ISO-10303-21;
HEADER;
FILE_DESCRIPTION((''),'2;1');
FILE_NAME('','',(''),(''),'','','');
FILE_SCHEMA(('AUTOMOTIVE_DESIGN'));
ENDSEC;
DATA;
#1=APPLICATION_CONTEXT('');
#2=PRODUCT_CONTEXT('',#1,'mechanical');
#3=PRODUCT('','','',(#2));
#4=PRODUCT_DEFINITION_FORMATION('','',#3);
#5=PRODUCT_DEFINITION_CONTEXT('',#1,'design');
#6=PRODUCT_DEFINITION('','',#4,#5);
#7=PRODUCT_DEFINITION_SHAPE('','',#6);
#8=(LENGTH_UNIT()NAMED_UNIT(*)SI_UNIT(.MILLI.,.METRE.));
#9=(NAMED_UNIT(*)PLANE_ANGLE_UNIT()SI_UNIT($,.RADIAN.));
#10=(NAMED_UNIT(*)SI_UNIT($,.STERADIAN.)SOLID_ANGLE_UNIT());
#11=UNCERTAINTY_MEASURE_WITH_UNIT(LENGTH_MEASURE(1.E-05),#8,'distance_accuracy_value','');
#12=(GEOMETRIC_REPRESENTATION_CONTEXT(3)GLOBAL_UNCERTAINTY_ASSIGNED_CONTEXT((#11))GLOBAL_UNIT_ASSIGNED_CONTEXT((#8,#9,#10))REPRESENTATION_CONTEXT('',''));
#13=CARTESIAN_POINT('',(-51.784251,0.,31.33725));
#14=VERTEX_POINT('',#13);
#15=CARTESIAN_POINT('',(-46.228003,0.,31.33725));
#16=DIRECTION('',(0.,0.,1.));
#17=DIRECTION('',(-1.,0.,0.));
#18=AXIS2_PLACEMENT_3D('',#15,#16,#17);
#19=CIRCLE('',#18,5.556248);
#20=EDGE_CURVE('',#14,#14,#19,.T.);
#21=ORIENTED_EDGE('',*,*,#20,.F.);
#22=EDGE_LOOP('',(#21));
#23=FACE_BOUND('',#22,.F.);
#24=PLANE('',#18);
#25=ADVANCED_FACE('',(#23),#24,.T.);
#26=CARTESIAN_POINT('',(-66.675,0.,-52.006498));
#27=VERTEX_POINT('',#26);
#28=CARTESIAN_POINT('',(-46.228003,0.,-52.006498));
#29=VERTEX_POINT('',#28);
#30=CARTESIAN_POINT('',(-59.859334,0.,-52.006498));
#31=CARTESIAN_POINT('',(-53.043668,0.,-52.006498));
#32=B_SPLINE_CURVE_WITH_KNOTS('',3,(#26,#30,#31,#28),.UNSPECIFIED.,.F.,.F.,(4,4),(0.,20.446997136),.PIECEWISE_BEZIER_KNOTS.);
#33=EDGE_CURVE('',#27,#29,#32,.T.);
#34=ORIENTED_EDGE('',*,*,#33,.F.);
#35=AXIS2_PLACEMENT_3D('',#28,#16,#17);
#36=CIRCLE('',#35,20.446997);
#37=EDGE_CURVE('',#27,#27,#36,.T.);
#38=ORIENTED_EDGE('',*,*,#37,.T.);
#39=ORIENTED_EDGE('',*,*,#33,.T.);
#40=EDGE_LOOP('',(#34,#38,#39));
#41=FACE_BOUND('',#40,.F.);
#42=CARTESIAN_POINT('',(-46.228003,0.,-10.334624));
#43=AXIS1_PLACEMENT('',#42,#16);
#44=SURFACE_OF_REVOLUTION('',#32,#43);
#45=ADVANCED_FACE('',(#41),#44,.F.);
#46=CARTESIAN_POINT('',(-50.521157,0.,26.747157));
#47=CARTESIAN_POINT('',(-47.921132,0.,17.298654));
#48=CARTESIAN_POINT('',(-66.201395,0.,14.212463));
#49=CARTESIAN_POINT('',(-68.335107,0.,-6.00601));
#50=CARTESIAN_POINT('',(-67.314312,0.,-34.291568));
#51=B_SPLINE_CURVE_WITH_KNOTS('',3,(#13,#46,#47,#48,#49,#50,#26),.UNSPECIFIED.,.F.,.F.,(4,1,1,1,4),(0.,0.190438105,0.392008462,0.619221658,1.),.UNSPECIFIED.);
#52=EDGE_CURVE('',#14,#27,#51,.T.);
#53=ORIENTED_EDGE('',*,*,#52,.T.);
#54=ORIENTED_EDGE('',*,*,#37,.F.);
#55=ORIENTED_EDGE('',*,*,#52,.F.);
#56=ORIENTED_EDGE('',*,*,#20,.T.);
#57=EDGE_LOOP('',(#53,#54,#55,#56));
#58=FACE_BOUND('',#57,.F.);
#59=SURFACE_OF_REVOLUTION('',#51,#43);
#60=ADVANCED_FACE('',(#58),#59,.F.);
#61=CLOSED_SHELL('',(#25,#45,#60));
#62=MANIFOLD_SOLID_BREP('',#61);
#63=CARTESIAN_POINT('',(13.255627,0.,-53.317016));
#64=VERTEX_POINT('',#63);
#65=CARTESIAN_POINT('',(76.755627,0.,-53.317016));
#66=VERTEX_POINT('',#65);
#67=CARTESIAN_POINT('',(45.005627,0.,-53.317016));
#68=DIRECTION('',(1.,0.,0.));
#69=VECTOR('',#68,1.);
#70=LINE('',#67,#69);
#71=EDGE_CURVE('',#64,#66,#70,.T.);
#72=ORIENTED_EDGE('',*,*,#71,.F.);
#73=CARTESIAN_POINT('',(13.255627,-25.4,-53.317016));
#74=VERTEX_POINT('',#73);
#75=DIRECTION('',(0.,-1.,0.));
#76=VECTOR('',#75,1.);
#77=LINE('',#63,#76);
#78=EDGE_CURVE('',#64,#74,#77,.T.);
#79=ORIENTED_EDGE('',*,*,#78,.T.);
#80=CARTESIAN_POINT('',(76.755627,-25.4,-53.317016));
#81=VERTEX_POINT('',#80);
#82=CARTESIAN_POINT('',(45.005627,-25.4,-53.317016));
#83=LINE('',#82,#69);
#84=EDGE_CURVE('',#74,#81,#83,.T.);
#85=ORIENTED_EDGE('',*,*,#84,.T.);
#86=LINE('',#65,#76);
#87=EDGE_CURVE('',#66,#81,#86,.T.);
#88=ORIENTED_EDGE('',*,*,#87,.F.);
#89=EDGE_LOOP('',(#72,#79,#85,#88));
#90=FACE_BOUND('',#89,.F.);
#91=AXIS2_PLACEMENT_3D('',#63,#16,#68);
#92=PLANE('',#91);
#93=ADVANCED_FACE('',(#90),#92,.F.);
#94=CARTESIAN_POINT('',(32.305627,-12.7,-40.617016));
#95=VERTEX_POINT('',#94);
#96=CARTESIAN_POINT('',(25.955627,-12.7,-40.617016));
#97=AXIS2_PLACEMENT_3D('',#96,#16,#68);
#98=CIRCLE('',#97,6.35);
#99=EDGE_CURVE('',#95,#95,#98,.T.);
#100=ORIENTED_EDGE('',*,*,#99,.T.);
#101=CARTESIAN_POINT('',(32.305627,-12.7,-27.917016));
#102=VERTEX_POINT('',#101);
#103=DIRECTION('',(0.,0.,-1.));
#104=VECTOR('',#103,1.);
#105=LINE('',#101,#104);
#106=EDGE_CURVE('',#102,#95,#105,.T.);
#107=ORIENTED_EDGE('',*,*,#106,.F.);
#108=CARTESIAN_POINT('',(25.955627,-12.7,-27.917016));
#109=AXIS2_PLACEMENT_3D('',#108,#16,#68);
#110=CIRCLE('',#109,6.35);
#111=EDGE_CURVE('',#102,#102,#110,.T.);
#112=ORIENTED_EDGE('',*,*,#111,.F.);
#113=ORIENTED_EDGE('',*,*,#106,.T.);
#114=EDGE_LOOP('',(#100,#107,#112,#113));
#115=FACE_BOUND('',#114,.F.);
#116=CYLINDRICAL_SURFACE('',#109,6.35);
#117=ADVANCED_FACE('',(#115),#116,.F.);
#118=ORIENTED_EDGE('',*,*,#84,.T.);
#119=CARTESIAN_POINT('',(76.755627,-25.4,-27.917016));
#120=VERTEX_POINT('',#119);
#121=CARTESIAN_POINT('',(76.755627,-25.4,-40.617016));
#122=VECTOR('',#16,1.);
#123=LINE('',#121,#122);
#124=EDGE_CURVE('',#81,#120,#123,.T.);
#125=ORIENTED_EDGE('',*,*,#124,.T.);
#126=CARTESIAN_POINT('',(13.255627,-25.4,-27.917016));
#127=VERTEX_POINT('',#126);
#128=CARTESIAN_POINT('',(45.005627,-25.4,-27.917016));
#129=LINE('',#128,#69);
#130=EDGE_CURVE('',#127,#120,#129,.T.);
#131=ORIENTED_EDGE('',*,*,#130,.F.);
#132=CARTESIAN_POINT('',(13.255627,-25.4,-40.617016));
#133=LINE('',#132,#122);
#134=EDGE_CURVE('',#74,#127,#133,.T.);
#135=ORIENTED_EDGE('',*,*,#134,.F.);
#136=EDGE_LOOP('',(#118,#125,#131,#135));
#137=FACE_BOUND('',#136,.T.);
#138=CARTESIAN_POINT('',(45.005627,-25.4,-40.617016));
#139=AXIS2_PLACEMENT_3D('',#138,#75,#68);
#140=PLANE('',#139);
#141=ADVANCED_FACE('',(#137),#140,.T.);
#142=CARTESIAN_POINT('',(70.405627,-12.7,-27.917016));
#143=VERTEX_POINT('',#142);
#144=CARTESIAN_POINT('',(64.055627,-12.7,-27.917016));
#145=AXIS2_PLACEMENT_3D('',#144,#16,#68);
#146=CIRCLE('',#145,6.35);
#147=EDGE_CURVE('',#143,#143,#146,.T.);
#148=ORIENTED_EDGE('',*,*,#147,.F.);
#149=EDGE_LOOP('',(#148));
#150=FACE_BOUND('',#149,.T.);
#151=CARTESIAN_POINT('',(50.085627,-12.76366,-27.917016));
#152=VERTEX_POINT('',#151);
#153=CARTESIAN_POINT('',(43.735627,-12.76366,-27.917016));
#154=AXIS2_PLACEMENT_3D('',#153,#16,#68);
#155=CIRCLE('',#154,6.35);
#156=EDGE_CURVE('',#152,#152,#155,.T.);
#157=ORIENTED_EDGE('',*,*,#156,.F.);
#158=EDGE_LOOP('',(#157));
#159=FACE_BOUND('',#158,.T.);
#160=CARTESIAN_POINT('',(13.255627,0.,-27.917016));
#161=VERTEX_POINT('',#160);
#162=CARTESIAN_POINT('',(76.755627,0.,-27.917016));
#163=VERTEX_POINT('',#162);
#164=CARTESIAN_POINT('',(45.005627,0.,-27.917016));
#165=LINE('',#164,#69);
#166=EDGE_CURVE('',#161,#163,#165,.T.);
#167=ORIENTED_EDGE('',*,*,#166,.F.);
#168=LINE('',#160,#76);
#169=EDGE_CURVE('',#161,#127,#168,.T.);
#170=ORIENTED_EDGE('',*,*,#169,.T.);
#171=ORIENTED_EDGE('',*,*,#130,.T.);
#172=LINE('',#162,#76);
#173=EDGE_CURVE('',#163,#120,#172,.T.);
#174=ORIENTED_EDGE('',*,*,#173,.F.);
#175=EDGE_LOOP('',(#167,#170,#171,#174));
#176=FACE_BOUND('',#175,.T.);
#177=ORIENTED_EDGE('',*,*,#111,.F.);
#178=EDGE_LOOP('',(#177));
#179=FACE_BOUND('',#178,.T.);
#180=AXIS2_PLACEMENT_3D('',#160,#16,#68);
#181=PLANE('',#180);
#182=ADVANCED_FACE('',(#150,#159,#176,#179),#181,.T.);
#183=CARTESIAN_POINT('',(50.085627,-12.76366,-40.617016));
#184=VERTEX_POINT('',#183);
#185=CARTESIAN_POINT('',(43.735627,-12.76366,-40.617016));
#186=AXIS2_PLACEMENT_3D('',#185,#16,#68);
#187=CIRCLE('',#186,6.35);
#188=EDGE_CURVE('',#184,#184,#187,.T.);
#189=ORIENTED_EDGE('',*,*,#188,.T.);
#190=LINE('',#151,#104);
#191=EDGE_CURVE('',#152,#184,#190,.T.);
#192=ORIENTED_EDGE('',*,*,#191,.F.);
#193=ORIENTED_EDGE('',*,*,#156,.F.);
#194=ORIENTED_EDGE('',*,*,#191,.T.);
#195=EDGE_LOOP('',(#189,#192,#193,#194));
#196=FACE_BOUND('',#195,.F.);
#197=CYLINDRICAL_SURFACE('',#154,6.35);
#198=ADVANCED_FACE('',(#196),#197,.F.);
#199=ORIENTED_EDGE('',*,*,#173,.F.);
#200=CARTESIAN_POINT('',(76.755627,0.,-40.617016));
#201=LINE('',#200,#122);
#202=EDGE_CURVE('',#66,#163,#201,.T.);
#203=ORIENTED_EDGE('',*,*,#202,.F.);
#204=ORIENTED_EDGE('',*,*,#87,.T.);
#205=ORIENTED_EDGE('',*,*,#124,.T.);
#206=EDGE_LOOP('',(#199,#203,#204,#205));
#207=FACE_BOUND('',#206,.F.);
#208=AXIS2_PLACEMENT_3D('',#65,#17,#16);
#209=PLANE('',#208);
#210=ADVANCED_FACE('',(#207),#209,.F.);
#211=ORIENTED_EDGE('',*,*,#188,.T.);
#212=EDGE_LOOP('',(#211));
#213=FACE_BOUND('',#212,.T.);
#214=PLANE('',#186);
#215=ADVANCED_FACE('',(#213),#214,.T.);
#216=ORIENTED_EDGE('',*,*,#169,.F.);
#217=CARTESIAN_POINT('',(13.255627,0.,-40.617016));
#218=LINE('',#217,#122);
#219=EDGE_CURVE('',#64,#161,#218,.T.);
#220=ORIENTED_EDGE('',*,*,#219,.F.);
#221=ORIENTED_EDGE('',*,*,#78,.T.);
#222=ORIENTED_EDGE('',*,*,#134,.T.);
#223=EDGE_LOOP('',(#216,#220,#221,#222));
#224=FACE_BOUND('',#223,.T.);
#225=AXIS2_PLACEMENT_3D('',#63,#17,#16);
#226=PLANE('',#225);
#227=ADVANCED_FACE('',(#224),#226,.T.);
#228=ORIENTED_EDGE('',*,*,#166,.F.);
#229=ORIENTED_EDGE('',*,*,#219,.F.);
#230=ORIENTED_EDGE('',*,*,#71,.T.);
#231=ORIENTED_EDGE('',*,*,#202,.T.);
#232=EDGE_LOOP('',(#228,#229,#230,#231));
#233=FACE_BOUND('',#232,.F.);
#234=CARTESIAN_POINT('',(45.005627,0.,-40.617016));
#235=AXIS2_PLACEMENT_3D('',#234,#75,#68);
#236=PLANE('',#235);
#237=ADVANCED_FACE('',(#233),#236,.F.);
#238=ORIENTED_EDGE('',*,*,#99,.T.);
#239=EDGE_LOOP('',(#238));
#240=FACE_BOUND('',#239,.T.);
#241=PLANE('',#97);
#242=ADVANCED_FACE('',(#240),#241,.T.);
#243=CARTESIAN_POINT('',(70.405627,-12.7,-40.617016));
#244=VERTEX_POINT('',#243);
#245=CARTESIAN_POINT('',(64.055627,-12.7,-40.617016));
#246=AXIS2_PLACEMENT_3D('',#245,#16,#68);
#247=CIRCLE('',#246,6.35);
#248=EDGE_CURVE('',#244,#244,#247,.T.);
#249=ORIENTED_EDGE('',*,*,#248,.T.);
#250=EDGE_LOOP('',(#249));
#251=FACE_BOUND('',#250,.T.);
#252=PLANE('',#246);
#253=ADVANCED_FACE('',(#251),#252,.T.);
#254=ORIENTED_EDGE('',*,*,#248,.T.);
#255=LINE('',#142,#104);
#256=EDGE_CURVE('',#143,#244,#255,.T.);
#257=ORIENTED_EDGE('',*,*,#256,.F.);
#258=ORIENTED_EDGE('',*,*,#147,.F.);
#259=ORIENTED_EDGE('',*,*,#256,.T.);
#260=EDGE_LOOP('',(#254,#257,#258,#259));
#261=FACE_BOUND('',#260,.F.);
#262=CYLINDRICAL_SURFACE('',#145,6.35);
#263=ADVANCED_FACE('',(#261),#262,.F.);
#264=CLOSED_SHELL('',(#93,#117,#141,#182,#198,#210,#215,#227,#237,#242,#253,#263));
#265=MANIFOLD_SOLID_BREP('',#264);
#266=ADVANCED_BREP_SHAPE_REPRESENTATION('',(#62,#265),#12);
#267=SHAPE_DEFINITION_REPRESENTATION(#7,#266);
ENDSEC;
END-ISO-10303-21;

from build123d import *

# Parameters (mm, degrees)
F5_W     = 63.5
F5_H     = 25.4
F6_DEPTH = 25.4
F7_R     = 6.35
F8_DEPTH = 12.7


# Not quite as in the source:
# - a feature of the source that left no trace in its solid (it failed there, or was rolled back) is left out


with BuildPart() as f4:
    # F3 (on Front) → F4 (revolve)
    with BuildSketch(Plane.XZ):
        with BuildLine():
            Line((-46.2280027568, 31.3372500241), (-51.7842508852, 31.3372500241))
            add(Edge.make_bspline(
                [(-51.7842508852, 31.3372500241), (-50.5211565441, 26.7471574214), (-47.9211324049, 17.2986537112), (-66.2013951665, 14.212463315), (-68.335106942, -6.0060096659), (-67.3143122563, -34.2915675348), (-66.6749998927, -52.0064979792)],
                knots=[0, 0, 0, 0, 0.1904381048, 0.3920084616, 0.6192216585, 1, 1, 1, 1], degree=3))
            add(Edge.make_bspline(
                [(-66.6749998927, -52.0064979792), (-59.8593341808, -52.0064979792), (-53.0436684688, -52.0064979792), (-46.2280027568, -52.0064979792)],
                knots=[0, 0, 0, 0, 20.4469971359, 20.4469971359, 20.4469971359, 20.4469971359], degree=3))
            Line((-46.2280027568, -52.0064979792), (-46.2280027568, 31.3372500241))
        make_face()
    revolve(axis=Axis((-46.2280027568, 0, -10.3346239775), (0, 0, 1)))


with BuildPart() as f6:
    # F5 (on Front) → F6 (new body)
    with BuildSketch(Plane.XZ):
        with Locations((45.0056269765, -40.6170164633)):
            Rectangle(F5_W, F5_H)
    extrude(amount=F6_DEPTH)

    # F7 (on face) → F8 (cut)
    with BuildSketch(Plane.XY.offset(-27.9170164633)):
        with Locations((25.9556269765, -12.7)):
            Circle(F7_R)
        with Locations((43.7356269765, -12.7636595487)):
            Circle(F7_R)
        with Locations((64.0556269765, -12.7)):
            Circle(F7_R)
    extrude(amount=-F8_DEPTH, mode=Mode.SUBTRACT)


solid = Compound([f4.part, f6.part])
